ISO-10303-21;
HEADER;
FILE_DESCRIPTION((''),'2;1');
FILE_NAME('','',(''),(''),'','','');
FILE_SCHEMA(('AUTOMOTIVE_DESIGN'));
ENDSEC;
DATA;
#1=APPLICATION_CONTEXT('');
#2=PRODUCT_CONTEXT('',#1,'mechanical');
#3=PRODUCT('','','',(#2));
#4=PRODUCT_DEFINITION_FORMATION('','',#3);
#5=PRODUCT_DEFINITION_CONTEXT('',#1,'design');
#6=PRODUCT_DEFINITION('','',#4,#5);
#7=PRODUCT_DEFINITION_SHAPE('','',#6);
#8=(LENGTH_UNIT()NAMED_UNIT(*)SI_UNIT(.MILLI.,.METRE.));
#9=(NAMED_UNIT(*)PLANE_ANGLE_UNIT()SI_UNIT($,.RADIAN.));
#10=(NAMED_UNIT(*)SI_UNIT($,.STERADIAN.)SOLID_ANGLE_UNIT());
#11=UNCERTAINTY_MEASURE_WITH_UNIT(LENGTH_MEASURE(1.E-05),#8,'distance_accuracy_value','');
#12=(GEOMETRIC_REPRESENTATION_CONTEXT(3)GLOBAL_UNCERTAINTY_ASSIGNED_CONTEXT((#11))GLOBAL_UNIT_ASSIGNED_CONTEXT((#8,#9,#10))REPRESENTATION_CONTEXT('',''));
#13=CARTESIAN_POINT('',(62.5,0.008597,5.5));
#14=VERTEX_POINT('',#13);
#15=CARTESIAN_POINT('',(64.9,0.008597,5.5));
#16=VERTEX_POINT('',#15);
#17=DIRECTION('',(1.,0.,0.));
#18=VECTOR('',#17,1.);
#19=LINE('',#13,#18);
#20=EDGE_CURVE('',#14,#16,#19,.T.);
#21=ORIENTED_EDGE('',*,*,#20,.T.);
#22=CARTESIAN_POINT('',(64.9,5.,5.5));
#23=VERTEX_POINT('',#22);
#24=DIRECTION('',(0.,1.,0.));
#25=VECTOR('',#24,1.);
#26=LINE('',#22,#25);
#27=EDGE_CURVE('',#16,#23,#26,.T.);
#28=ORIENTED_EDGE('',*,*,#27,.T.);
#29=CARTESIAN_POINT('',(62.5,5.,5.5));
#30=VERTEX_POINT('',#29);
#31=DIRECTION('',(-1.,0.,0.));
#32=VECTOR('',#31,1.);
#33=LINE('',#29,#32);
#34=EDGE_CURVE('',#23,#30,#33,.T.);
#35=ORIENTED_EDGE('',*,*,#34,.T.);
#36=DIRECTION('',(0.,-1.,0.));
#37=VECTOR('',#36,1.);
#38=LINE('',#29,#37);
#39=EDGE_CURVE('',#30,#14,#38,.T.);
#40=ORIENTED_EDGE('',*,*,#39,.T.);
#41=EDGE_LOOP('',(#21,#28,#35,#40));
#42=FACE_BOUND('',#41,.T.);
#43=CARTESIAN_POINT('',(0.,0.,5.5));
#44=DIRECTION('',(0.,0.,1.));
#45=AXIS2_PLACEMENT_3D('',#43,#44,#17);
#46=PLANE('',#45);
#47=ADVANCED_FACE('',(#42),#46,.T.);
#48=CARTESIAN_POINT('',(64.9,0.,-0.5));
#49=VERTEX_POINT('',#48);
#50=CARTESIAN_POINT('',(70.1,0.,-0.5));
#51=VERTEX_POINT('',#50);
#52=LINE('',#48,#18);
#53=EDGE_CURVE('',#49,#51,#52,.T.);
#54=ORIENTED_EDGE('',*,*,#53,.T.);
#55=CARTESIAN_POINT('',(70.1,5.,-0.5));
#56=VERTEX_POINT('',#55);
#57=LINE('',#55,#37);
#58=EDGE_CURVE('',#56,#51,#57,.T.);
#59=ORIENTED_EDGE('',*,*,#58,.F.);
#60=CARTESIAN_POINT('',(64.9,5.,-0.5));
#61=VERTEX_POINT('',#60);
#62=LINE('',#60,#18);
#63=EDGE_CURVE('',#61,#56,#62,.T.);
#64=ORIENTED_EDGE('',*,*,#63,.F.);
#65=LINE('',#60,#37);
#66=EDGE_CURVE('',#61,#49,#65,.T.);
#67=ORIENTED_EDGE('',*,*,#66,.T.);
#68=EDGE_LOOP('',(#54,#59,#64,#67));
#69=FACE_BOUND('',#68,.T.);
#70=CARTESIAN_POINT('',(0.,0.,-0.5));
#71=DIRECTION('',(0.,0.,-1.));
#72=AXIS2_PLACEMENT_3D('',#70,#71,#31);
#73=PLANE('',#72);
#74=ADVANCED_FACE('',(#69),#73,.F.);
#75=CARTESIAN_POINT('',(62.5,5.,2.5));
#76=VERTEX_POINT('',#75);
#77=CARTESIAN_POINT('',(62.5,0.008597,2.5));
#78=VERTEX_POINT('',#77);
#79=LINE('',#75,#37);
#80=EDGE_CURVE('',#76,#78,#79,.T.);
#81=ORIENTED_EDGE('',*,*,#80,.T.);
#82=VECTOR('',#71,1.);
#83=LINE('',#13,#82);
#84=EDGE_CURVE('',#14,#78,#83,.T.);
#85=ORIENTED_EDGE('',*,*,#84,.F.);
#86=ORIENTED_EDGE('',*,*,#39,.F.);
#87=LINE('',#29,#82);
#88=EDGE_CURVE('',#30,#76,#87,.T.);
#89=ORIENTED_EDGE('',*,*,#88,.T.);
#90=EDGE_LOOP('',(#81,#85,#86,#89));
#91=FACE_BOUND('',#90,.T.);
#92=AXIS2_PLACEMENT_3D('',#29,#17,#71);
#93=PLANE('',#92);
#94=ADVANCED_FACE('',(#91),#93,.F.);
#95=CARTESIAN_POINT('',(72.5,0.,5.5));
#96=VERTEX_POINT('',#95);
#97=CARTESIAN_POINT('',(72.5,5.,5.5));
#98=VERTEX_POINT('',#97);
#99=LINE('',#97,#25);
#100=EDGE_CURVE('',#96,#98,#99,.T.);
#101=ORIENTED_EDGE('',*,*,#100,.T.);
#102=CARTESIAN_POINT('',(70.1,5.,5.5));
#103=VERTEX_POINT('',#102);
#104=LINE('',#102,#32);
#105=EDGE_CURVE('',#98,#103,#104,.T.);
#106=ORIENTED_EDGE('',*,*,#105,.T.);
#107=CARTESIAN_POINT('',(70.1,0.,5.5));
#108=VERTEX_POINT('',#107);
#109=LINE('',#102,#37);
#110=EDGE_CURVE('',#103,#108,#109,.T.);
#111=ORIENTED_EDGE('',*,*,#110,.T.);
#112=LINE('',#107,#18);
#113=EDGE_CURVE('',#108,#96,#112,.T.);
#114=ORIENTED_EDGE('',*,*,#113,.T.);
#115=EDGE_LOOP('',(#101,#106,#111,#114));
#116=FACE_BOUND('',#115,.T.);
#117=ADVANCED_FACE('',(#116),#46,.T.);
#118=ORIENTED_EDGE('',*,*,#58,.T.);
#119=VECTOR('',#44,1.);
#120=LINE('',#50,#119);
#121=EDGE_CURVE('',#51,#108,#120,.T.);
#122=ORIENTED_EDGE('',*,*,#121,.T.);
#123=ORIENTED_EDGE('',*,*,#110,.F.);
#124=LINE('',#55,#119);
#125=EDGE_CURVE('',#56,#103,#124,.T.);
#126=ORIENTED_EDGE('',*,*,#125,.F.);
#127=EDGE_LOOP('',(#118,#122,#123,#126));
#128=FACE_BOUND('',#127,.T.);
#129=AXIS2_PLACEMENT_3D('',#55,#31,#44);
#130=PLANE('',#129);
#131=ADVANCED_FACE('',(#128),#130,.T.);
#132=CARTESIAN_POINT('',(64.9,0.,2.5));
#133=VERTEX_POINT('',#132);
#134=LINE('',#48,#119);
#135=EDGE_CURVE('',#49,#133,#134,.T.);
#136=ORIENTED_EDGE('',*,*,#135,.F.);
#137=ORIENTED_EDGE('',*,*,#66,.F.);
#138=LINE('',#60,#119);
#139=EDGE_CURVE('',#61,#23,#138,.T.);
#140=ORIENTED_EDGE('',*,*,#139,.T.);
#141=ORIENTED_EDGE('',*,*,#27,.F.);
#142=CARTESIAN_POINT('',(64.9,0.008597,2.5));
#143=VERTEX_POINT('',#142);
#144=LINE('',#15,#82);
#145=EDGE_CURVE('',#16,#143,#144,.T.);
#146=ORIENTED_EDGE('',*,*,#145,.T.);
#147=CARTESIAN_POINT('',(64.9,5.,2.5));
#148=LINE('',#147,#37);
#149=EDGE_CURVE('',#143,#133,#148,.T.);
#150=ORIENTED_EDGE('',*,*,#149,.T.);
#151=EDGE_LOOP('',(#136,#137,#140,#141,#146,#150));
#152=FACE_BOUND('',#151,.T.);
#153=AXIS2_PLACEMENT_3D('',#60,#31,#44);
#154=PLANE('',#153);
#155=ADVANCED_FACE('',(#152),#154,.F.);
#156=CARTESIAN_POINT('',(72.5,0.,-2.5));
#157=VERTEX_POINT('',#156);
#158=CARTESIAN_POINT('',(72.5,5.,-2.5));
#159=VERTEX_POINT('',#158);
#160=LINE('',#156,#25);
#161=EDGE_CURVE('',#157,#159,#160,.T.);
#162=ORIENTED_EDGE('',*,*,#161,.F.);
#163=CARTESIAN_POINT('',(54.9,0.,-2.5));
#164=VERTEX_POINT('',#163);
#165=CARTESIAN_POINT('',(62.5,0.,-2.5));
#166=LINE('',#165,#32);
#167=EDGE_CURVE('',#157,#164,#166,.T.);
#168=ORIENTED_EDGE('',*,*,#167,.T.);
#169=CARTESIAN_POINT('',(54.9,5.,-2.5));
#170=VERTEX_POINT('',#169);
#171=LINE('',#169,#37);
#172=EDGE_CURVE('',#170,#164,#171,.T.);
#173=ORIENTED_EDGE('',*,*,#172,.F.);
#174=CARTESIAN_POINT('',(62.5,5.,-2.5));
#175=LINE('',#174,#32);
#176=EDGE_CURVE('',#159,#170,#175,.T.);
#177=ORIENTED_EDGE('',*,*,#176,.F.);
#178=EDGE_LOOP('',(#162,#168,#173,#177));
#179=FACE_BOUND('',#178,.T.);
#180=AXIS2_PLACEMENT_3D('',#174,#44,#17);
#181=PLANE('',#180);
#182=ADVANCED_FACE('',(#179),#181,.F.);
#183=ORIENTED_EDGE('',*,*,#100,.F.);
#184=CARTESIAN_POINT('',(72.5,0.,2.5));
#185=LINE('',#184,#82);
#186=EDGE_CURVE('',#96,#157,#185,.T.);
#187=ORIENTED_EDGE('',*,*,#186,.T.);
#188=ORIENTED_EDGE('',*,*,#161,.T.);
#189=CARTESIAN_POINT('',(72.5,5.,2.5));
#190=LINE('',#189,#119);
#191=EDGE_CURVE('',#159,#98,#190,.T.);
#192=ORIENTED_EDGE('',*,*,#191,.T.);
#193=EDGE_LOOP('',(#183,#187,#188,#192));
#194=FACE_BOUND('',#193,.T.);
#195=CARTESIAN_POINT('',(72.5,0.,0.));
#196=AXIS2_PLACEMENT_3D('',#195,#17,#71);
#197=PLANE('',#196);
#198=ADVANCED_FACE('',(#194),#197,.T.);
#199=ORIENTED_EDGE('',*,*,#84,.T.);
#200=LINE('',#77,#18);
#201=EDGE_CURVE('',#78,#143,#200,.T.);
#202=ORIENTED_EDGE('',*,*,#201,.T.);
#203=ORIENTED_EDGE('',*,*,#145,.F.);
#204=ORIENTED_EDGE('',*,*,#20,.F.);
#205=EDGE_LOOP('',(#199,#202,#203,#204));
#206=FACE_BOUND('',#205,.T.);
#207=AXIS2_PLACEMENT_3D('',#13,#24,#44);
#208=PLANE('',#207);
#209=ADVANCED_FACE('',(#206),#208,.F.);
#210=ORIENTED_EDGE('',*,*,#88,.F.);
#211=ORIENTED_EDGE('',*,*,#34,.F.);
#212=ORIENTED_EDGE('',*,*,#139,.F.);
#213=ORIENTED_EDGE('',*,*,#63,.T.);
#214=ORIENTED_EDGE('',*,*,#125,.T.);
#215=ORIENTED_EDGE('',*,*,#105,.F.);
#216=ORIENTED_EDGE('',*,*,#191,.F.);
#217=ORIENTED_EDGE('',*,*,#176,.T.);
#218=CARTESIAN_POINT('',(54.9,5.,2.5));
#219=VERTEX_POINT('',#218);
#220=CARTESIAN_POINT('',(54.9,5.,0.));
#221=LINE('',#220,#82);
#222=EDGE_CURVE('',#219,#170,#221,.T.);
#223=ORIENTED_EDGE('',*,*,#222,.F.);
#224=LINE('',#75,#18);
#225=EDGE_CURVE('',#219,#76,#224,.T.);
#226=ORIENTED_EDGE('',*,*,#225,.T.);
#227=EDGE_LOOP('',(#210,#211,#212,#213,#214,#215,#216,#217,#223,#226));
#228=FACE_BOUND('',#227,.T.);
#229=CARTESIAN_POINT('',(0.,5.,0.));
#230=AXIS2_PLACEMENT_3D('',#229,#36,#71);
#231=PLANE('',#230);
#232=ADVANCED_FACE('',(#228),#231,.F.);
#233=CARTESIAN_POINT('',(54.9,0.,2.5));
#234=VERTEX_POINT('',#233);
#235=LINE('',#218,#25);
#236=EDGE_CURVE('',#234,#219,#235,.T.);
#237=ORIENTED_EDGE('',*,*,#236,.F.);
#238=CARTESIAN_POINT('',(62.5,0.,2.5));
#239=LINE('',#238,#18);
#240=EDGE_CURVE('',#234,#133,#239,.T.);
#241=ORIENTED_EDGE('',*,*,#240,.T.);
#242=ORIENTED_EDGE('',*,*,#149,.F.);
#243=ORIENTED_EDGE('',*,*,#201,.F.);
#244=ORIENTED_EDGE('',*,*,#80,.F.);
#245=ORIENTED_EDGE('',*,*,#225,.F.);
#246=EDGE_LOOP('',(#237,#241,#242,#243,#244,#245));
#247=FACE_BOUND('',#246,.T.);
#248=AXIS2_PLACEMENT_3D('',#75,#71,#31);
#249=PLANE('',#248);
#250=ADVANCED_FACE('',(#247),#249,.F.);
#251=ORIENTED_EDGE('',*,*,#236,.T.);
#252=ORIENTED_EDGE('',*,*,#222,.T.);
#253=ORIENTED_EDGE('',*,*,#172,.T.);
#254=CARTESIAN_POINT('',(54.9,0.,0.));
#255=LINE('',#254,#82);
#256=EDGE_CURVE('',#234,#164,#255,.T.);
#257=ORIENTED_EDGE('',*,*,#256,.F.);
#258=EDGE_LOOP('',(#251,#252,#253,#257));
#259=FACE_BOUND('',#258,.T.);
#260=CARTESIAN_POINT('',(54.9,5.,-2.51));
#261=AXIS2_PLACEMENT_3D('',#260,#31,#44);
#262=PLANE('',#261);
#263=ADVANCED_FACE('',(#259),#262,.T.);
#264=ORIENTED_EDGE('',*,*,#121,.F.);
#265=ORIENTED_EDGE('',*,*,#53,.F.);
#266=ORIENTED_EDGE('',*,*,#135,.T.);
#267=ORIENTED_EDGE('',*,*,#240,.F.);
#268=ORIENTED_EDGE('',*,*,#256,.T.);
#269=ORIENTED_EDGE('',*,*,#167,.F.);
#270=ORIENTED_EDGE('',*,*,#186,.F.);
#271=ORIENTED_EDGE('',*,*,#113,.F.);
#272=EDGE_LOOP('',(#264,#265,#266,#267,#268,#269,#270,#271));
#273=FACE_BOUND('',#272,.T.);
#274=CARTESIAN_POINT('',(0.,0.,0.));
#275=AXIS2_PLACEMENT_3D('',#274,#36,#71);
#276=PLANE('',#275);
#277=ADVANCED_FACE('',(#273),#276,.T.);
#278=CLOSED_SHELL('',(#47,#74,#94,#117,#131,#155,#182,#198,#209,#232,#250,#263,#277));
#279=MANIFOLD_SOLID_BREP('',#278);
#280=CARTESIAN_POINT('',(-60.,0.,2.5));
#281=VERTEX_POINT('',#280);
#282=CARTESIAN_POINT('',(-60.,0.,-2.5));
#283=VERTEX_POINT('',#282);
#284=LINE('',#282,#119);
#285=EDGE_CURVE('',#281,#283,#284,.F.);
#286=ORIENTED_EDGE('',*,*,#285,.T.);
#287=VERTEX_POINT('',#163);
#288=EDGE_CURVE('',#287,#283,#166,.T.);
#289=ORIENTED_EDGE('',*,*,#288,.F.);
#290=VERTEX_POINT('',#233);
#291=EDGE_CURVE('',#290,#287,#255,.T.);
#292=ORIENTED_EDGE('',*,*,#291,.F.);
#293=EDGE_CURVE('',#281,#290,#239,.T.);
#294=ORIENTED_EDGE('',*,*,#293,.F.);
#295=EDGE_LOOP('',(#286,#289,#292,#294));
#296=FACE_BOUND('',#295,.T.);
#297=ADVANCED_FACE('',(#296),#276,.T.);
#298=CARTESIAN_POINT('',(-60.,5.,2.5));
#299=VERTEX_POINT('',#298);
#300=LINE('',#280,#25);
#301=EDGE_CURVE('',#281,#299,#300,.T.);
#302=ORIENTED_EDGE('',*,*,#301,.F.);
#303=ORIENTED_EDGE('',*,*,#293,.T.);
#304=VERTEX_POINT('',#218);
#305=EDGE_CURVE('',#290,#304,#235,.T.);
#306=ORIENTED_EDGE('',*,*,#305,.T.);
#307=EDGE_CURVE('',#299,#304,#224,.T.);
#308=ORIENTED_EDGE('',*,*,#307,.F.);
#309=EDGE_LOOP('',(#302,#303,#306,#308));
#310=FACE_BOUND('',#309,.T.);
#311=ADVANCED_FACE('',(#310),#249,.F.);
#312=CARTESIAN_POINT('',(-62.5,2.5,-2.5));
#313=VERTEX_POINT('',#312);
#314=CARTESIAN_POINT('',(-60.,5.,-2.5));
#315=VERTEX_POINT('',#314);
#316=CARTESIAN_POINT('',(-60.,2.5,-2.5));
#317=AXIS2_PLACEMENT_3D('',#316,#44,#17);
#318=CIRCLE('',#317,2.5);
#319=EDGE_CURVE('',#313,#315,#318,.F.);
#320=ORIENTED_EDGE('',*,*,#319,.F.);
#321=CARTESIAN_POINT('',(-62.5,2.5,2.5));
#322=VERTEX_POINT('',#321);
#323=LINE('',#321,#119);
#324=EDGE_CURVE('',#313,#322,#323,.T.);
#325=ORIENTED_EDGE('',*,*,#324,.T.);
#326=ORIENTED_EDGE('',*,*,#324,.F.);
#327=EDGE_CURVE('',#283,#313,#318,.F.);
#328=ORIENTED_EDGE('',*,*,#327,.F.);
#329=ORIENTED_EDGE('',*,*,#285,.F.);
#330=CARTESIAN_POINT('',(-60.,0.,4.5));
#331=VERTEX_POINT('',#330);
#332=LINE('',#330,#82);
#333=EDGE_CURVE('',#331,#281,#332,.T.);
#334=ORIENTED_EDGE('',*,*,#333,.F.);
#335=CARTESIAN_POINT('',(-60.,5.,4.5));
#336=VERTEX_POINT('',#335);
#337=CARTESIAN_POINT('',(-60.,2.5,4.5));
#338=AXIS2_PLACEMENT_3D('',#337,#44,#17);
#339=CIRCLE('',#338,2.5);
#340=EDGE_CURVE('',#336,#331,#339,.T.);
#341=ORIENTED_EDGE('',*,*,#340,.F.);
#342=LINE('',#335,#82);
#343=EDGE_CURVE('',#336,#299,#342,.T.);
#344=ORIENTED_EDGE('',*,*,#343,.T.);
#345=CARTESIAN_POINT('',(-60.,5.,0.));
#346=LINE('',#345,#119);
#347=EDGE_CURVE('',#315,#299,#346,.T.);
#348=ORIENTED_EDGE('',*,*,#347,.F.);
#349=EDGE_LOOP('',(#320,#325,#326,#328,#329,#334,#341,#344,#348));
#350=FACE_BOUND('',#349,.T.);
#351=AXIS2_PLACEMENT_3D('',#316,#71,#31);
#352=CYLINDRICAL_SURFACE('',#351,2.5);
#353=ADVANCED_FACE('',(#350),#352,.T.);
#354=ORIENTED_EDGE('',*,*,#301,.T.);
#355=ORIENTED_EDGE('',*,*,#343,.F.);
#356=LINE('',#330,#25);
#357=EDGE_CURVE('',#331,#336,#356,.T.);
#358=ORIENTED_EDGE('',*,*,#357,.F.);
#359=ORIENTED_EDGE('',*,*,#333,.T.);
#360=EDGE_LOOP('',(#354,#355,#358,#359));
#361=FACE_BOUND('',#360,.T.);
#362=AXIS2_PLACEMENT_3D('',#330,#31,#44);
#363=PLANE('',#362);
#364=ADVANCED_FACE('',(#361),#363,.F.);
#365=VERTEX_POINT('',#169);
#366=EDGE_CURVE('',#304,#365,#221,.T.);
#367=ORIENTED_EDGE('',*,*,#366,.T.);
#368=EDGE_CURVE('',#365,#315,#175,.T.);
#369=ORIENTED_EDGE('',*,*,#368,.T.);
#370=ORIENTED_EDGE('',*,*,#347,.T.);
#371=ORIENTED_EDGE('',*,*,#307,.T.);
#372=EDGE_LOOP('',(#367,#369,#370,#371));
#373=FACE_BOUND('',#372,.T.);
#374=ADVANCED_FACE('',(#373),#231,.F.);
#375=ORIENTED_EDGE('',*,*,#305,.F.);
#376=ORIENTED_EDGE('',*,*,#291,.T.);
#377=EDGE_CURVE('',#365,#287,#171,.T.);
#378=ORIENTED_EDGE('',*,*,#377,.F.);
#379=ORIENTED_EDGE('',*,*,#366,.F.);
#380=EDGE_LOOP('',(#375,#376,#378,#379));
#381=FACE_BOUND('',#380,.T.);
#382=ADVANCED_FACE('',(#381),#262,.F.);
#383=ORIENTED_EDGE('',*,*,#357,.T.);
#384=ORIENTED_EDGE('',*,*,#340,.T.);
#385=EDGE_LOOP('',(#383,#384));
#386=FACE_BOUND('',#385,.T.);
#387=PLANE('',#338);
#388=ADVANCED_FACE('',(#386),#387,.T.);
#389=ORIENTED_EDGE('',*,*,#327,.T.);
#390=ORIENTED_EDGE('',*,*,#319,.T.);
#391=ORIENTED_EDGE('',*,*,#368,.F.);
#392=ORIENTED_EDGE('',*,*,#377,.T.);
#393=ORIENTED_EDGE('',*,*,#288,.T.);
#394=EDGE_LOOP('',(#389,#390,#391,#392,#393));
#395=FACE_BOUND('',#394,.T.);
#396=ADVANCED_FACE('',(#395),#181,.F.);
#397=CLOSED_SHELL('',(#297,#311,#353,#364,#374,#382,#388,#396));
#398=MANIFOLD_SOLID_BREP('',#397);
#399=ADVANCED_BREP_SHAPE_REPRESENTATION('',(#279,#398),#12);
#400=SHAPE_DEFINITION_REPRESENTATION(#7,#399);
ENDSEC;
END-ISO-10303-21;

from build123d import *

# Parameters (mm, degrees)
SKETCH1_W              = 125
SKETCH1_H              = 5
BOSS_EXTRUDE1_DEPTH    = 5
FILLET1_R              = 2.5
SKETCH3_W              = 5
SKETCH3_H              = 5
BOSS_EXTRUDE2_DEPTH    = 10
SKETCH4_W              = 5.2
SKETCH4_H              = 5
CUT_EXTRUDE1_DEPTH     = 3
BOSS_EXTRUDE3_DEPTH    = 2
SKETCH7_W              = 2.4
SKETCH7_H              = 4.991403031
SKETCH7_H_2            = 5
BOSS_EXTRUDE4_DEPTH    = 3
SPLIT1_SURFACE_1_BACK  = 136.329
SPLIT1_SURFACE_1_DEPTH = 272.658
SPLIT1_SURFACE_2_BACK  = 136.329
SPLIT1_SURFACE_2_DEPTH = 272.658


with BuildPart() as part:
    # Sketch1 → Boss-Extrude1 (new body)
    with BuildSketch(Plane(origin=(0, 0, 0), x_dir=(-1, 0, 0), z_dir=(0, 1, 0))):
        Rectangle(SKETCH1_W, SKETCH1_H)
    extrude(amount=BOSS_EXTRUDE1_DEPTH)

    # Fillet1
    fillet1_edges = [part.edges().sort_by_distance(p)[0] for p in [
        (-62.5, 5, 0),
        (-62.5, 0, 0),
    ]]
    fillet(fillet1_edges, radius=FILLET1_R - 0.0001)  # a hair under: the kernel refuses the full size

    # Sketch3 → Boss-Extrude2 (add)
    with BuildSketch(Plane.YZ.offset(62.5)):
        with Locations((2.5, 0)):
            Rectangle(SKETCH3_W, SKETCH3_H)
    extrude(amount=BOSS_EXTRUDE2_DEPTH)

    # Sketch4 → Cut-Extrude1 (cut)
    with BuildSketch(Plane.XY.offset(2.5)):
        with Locations((67.5, 2.5)):
            Rectangle(SKETCH4_W, SKETCH4_H)
    extrude(amount=-CUT_EXTRUDE1_DEPTH, mode=Mode.SUBTRACT)

    # Sketch5 → Boss-Extrude3 (add)
    with BuildSketch(Plane.XY.offset(2.5)):
        with BuildLine():
            Line((-60, 0), (-60, 5))
            ThreePointArc((-60, 5), (-62.5, 2.5), (-60, 0))
        make_face()
    extrude(amount=BOSS_EXTRUDE3_DEPTH)

    # Sketch7 → Boss-Extrude4 (add)
    with BuildSketch(Plane.XY.offset(2.5)):
        with Locations((63.7, 2.504298485)):
            Rectangle(SKETCH7_W, SKETCH7_H)
        with Locations((71.3, 2.5)):
            Rectangle(SKETCH7_W, SKETCH7_H_2)
    extrude(amount=BOSS_EXTRUDE4_DEPTH)


with BuildPart() as body_2:
    # Split1: the piece behind the surface
    add(part.part)
    # Split1 surface: a surface, the sketch's curves swept straight by 272.658 mm
    with BuildLine(Plane.XY.offset(2.5).offset(-SPLIT1_SURFACE_1_BACK), mode=Mode.PRIVATE) as split1_surface_1_path:
        Line((54.9, 5), (54.9, 0))
    split1_surface_1 = Shell.extrude(split1_surface_1_path.wire(), (0 * SPLIT1_SURFACE_1_DEPTH, 0 * SPLIT1_SURFACE_1_DEPTH, 1 * SPLIT1_SURFACE_1_DEPTH))
    split(bisect_by=split1_surface_1, keep=Keep.BOTTOM)


with BuildPart() as part_1:
    add(part.part)

    # Split1: split by a surface, the side it looks to stays
    # Split1 surface: a surface, the sketch's curves swept straight by 272.658 mm
    with BuildLine(Plane.XY.offset(2.5).offset(-SPLIT1_SURFACE_2_BACK), mode=Mode.PRIVATE) as split1_surface_2_path:
        Line((54.9, 5), (54.9, 0))
    split1_surface_2 = Shell.extrude(split1_surface_2_path.wire(), (0 * SPLIT1_SURFACE_2_DEPTH, 0 * SPLIT1_SURFACE_2_DEPTH, 1 * SPLIT1_SURFACE_2_DEPTH))
    split(bisect_by=split1_surface_2, keep=Keep.TOP)


solid = Compound([body_2.part, part_1.part])
